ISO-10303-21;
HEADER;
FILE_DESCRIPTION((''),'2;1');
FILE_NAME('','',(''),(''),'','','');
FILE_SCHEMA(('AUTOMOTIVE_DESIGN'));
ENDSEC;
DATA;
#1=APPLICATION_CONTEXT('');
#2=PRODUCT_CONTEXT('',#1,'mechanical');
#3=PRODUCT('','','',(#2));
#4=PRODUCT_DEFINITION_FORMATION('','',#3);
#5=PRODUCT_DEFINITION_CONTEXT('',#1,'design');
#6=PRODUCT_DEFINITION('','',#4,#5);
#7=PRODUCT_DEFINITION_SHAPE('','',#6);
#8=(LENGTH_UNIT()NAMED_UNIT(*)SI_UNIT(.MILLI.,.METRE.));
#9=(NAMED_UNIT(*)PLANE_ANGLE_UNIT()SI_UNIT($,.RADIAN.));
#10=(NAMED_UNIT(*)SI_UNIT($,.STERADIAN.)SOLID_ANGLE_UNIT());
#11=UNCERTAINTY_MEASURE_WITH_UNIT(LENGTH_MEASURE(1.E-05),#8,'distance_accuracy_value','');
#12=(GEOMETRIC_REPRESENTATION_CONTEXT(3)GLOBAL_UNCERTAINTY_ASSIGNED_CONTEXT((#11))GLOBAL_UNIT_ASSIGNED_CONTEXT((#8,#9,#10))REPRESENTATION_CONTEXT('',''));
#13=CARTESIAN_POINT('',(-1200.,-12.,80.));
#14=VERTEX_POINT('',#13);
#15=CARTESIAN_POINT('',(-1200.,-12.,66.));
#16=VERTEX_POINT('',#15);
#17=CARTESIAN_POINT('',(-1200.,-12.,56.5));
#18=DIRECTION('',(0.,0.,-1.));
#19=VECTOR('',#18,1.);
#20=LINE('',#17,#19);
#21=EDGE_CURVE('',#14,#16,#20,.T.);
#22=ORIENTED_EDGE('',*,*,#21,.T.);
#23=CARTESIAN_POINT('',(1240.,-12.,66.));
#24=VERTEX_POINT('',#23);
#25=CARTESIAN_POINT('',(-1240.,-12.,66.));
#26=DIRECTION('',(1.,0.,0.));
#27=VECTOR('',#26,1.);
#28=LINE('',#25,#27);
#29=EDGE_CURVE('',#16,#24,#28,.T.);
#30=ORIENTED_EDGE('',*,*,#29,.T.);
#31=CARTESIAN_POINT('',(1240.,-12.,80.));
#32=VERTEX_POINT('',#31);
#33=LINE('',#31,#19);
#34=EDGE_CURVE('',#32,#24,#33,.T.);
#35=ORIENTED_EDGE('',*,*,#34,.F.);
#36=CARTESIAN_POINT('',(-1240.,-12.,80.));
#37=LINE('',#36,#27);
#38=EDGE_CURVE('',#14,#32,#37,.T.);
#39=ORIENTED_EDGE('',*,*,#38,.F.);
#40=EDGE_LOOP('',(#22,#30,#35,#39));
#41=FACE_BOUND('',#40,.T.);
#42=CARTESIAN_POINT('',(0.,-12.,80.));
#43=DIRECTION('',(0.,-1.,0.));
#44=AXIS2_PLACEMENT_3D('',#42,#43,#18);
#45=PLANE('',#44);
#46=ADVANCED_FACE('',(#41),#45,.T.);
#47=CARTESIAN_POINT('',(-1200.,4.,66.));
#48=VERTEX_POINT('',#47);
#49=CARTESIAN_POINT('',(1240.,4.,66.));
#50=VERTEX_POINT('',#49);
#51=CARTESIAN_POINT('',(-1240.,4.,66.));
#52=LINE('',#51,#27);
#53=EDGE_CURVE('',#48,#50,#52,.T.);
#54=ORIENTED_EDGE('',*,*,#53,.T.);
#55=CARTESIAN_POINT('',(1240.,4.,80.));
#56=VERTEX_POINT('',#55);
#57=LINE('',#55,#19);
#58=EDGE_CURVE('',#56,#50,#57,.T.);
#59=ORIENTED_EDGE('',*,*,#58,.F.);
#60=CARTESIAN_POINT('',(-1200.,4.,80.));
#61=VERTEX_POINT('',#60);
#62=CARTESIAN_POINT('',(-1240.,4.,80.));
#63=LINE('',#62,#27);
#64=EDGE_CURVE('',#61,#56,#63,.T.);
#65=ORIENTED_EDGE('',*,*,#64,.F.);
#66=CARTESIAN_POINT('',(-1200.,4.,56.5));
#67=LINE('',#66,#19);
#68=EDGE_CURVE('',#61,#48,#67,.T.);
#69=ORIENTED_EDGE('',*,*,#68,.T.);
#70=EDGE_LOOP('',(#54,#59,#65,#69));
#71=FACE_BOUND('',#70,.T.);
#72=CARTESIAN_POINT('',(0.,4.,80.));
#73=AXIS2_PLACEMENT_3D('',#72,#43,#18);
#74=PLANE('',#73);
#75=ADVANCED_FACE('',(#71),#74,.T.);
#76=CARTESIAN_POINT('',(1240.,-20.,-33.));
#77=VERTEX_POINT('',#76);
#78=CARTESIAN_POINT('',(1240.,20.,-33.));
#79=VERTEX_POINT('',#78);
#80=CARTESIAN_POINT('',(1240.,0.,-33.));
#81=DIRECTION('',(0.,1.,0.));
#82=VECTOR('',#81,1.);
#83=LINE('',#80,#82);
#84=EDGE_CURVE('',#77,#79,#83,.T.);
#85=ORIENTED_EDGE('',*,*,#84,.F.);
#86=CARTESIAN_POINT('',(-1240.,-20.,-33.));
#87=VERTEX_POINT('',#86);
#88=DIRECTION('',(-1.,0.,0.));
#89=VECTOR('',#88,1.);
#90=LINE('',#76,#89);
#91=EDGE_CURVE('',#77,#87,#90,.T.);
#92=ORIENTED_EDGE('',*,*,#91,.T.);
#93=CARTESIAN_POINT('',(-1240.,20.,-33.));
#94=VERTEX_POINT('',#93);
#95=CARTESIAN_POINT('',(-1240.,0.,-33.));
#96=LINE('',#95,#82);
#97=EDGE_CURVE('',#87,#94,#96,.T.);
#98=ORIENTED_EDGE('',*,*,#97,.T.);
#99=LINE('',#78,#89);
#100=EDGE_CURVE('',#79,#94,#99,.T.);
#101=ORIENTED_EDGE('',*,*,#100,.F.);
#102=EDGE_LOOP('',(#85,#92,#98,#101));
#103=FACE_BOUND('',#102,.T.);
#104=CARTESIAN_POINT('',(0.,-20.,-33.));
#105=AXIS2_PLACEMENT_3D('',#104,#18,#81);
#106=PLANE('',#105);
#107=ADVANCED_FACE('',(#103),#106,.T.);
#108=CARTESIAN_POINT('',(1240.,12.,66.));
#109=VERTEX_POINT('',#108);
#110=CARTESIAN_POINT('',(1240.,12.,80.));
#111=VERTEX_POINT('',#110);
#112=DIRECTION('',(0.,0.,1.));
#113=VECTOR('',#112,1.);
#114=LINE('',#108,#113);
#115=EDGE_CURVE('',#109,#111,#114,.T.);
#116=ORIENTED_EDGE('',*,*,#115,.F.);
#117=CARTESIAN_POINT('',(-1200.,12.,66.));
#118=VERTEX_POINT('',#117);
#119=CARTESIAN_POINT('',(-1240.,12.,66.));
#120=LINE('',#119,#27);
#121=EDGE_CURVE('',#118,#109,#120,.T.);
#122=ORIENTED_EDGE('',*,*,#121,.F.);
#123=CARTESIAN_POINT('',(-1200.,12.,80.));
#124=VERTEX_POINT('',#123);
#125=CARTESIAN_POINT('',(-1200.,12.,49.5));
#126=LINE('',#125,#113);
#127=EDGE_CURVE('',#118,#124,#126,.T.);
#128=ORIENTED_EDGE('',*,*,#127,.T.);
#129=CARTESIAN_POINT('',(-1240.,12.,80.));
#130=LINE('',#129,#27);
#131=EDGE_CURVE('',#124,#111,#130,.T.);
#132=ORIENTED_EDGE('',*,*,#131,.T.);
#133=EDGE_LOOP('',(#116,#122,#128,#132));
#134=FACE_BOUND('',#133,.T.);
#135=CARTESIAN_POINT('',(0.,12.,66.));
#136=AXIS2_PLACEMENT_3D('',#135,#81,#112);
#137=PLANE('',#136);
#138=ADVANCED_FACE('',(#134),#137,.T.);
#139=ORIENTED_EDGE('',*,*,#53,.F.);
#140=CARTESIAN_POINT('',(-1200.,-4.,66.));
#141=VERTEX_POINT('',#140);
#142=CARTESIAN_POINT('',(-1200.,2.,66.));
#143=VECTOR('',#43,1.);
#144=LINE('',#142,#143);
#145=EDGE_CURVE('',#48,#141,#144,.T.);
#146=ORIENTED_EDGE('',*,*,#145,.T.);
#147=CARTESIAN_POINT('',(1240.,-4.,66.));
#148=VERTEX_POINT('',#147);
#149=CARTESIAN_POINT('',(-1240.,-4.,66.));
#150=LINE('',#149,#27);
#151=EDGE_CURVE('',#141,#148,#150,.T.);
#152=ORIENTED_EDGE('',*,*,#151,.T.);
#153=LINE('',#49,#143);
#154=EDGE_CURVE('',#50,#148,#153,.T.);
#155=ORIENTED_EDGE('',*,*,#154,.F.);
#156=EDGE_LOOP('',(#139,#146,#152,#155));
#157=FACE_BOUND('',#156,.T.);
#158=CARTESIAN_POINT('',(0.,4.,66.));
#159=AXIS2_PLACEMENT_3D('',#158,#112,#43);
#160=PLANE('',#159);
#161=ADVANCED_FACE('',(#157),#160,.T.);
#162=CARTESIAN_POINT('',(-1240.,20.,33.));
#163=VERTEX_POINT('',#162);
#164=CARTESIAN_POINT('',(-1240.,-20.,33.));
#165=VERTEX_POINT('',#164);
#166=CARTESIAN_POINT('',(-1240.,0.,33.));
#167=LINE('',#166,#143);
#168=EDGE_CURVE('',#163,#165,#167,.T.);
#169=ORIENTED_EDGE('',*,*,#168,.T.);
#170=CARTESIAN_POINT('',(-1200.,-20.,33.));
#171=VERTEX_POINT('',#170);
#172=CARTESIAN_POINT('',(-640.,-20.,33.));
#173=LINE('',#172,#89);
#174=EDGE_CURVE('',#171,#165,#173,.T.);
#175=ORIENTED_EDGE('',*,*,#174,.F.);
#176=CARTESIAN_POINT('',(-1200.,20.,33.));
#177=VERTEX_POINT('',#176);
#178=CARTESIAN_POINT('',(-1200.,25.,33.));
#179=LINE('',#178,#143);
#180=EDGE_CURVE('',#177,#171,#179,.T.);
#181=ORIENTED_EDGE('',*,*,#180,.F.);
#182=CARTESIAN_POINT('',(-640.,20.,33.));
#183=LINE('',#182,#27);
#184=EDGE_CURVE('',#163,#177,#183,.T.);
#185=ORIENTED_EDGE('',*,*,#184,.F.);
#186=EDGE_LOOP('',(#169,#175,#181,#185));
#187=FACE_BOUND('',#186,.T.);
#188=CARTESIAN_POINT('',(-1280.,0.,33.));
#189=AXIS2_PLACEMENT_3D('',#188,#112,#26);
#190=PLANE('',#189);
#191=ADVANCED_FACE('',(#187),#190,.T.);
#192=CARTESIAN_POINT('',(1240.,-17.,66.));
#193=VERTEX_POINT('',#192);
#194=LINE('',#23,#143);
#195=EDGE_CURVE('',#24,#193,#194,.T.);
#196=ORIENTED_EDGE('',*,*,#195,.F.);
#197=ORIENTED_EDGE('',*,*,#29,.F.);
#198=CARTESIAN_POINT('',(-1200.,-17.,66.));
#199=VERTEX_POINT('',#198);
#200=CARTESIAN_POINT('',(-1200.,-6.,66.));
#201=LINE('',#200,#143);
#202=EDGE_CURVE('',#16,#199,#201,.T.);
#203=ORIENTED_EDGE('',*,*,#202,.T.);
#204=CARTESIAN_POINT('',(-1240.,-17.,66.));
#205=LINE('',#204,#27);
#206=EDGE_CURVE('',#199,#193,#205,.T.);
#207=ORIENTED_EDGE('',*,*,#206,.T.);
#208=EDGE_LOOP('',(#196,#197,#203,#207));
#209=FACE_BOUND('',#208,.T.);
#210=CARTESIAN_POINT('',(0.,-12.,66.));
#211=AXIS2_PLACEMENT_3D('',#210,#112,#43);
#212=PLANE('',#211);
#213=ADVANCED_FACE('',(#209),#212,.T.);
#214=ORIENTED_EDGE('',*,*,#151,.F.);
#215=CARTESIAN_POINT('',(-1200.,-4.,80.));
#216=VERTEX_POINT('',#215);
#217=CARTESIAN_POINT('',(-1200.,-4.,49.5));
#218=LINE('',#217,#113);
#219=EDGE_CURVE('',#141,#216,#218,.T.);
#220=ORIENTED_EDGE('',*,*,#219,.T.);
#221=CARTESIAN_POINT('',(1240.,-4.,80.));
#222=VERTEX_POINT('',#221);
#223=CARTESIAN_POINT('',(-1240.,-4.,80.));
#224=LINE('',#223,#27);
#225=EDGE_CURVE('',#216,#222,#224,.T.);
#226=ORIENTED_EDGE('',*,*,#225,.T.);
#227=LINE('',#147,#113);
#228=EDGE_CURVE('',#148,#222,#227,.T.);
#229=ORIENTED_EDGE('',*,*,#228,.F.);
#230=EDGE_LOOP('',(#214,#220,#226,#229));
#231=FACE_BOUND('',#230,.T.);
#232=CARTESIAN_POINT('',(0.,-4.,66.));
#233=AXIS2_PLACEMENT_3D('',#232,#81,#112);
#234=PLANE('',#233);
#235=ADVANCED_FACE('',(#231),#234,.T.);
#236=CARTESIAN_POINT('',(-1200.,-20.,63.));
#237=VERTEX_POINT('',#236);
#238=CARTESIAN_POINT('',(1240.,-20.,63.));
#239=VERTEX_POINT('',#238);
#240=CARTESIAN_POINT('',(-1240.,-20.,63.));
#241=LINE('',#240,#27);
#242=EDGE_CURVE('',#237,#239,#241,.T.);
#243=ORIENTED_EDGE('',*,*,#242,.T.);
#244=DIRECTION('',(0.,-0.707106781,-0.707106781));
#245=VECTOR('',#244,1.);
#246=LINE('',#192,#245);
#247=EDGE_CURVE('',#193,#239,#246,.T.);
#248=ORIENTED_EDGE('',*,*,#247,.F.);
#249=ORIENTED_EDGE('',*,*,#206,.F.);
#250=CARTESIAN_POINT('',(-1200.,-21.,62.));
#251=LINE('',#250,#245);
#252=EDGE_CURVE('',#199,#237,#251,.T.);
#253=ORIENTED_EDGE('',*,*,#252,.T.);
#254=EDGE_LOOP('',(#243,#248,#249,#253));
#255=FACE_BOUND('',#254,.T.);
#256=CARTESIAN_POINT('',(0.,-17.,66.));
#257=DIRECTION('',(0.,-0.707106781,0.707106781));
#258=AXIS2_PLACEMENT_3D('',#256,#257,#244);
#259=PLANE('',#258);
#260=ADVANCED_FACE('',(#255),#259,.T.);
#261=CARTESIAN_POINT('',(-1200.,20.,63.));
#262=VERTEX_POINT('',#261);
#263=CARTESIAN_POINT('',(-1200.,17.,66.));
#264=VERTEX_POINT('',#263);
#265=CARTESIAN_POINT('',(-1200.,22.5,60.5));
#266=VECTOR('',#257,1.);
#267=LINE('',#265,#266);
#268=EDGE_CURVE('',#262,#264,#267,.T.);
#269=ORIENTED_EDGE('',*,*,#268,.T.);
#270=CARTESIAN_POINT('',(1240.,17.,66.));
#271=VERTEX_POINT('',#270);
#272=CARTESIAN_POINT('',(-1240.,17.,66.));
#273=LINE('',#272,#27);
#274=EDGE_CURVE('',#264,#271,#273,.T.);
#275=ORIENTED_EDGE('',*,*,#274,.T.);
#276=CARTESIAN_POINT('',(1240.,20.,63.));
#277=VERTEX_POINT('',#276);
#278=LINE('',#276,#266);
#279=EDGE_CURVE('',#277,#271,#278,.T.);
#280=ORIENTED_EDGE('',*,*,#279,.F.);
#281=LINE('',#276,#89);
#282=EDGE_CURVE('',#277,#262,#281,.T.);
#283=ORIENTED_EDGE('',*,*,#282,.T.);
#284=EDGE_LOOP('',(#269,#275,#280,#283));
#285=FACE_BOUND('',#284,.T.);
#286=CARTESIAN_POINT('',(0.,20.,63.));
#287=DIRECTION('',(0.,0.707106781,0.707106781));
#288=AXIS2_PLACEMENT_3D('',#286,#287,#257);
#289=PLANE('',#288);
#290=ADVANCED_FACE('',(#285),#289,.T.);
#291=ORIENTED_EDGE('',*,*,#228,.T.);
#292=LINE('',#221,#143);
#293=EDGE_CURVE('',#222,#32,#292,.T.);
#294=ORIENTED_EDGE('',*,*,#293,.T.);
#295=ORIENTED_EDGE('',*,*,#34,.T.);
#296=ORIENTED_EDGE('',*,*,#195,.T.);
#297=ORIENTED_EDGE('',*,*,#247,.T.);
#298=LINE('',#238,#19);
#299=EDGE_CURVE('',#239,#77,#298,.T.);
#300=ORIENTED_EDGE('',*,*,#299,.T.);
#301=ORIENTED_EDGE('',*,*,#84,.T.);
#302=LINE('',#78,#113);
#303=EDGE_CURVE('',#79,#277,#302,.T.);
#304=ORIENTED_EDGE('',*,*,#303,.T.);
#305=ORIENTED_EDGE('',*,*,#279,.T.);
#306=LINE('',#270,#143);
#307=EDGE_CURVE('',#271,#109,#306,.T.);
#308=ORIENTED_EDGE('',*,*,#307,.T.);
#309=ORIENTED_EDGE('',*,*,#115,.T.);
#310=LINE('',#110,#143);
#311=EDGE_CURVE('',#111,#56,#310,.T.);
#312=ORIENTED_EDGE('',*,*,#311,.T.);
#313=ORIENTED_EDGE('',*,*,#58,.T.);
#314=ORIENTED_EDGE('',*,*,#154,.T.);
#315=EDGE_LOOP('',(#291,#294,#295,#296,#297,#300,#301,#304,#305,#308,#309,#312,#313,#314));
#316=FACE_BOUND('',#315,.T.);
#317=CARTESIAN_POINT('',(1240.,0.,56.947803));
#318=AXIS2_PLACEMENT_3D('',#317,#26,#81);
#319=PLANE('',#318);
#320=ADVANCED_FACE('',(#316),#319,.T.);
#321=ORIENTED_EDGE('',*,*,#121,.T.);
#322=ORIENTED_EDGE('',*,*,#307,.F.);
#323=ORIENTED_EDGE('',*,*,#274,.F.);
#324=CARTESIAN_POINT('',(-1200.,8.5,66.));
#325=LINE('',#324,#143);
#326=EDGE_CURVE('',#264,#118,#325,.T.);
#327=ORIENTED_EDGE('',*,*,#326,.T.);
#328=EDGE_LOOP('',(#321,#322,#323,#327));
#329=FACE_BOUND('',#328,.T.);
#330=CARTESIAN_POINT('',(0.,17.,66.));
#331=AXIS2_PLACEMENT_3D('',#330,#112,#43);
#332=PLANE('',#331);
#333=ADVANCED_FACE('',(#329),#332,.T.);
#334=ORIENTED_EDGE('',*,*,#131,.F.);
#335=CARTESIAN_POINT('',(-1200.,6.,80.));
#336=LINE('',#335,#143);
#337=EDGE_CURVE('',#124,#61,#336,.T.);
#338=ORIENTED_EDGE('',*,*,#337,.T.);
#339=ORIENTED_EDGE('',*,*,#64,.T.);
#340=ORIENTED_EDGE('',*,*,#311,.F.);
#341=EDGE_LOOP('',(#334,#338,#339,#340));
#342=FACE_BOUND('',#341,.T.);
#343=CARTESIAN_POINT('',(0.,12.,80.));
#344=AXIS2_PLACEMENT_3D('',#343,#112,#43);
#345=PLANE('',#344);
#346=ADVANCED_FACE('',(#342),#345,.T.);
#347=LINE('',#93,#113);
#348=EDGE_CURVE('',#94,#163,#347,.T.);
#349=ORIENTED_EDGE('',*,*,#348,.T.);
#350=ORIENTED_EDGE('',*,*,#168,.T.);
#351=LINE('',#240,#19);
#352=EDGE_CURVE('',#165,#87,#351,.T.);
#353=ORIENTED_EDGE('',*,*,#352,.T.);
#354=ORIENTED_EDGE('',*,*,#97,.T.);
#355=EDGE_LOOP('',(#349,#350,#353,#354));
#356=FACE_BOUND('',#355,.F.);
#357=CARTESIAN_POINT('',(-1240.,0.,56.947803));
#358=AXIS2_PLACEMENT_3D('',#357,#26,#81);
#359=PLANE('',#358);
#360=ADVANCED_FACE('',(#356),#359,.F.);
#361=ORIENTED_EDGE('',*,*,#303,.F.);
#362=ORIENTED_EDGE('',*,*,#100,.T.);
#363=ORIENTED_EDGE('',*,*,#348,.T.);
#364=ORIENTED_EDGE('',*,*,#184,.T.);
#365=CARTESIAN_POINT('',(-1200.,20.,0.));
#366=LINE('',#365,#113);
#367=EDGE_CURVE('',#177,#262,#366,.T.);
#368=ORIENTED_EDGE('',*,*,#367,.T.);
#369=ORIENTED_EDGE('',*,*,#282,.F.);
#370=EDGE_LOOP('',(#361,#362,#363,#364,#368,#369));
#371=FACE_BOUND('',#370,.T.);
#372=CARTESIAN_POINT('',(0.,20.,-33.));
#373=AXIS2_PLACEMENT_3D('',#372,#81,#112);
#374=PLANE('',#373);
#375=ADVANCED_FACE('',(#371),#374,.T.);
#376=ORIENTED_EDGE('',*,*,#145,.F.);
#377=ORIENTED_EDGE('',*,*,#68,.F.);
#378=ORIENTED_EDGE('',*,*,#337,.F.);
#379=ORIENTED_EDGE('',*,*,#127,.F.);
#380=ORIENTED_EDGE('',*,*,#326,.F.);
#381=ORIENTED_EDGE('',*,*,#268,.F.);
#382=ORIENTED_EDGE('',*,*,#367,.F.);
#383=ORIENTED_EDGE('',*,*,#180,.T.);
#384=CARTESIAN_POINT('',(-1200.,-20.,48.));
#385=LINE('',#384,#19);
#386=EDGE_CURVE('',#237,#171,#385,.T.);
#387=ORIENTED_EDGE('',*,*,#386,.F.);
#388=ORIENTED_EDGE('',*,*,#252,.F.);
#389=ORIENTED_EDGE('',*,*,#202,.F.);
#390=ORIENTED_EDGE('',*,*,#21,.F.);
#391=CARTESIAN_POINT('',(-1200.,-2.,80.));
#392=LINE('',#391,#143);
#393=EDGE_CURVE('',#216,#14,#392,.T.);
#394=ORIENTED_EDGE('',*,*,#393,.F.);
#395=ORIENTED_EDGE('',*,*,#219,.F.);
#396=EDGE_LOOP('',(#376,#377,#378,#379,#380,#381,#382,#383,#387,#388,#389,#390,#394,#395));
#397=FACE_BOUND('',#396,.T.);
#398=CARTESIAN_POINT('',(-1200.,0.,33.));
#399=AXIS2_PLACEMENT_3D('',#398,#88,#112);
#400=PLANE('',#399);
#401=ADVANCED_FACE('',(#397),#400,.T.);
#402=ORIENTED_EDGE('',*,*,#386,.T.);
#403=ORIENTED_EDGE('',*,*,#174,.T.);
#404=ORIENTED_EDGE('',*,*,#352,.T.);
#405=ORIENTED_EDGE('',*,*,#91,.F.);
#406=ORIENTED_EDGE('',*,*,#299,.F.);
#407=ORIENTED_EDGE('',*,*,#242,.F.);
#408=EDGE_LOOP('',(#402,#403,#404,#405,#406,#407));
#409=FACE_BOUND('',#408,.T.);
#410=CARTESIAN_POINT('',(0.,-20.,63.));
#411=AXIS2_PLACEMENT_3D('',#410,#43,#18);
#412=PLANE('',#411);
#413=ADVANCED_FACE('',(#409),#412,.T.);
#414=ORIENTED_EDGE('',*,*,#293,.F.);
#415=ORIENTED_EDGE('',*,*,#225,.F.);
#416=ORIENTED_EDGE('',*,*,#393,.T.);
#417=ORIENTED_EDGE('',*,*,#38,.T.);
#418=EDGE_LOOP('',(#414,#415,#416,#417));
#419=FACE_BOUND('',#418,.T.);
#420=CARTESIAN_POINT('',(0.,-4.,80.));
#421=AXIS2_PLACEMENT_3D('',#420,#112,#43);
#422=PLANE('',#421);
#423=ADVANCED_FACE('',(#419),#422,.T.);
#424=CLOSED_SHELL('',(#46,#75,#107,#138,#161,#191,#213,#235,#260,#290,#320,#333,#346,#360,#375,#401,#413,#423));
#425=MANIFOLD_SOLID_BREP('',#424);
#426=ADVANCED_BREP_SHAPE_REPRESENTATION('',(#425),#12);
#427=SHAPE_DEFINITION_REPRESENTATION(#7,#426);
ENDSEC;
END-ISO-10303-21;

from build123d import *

# Parameters (mm, degrees)
F1_W     = 40
F1_H     = 33
F3_DEPTH = 1240
F2_W     = 80
F2_H     = 100
F4_DEPTH = 25
F5_W     = 2480
F5_H     = 50
F6_DEPTH = 2512


# Not quite as in the source:
# - an extrude ends at something that could not be found from the text; its depth is read off the source's solid


with BuildPart() as f3:
    # F1 (on Right) → F3 (new body, symmetric)
    with BuildSketch(Plane.YZ):
        Polygon((20, 33), (20, 63), (17, 66), (12, 66), (12, 80), (4, 80), (4, 66), (-4, 66), (-4, 80), (-12, 80), (-12, 66), (-17, 66), (-20, 63), (-20, 33), align=None)
        with Locations((0, 16.5)):
            Rectangle(F1_W, F1_H)
        with Locations((0, -16.5)):
            Rectangle(F1_W, F1_H)
    extrude(amount=F3_DEPTH, both=True)

    # F2 (on Front) → F4 (cut, symmetric)
    with BuildSketch(Plane.XZ):
        with Locations((-1240, 83)):
            Rectangle(F2_W, F2_H)
        with Locations((-1240, -83)):
            Rectangle(F2_W, F2_H)
    extrude(amount=F4_DEPTH, both=True, mode=Mode.SUBTRACT)

    # F5 (on face) → F6 (cut, through all)
    with BuildSketch(Plane.XZ.offset(20)):
        with Locations((0, -58)):
            Rectangle(F5_W, F5_H)
    extrude(amount=-F6_DEPTH, mode=Mode.SUBTRACT)


solid = f3.part
